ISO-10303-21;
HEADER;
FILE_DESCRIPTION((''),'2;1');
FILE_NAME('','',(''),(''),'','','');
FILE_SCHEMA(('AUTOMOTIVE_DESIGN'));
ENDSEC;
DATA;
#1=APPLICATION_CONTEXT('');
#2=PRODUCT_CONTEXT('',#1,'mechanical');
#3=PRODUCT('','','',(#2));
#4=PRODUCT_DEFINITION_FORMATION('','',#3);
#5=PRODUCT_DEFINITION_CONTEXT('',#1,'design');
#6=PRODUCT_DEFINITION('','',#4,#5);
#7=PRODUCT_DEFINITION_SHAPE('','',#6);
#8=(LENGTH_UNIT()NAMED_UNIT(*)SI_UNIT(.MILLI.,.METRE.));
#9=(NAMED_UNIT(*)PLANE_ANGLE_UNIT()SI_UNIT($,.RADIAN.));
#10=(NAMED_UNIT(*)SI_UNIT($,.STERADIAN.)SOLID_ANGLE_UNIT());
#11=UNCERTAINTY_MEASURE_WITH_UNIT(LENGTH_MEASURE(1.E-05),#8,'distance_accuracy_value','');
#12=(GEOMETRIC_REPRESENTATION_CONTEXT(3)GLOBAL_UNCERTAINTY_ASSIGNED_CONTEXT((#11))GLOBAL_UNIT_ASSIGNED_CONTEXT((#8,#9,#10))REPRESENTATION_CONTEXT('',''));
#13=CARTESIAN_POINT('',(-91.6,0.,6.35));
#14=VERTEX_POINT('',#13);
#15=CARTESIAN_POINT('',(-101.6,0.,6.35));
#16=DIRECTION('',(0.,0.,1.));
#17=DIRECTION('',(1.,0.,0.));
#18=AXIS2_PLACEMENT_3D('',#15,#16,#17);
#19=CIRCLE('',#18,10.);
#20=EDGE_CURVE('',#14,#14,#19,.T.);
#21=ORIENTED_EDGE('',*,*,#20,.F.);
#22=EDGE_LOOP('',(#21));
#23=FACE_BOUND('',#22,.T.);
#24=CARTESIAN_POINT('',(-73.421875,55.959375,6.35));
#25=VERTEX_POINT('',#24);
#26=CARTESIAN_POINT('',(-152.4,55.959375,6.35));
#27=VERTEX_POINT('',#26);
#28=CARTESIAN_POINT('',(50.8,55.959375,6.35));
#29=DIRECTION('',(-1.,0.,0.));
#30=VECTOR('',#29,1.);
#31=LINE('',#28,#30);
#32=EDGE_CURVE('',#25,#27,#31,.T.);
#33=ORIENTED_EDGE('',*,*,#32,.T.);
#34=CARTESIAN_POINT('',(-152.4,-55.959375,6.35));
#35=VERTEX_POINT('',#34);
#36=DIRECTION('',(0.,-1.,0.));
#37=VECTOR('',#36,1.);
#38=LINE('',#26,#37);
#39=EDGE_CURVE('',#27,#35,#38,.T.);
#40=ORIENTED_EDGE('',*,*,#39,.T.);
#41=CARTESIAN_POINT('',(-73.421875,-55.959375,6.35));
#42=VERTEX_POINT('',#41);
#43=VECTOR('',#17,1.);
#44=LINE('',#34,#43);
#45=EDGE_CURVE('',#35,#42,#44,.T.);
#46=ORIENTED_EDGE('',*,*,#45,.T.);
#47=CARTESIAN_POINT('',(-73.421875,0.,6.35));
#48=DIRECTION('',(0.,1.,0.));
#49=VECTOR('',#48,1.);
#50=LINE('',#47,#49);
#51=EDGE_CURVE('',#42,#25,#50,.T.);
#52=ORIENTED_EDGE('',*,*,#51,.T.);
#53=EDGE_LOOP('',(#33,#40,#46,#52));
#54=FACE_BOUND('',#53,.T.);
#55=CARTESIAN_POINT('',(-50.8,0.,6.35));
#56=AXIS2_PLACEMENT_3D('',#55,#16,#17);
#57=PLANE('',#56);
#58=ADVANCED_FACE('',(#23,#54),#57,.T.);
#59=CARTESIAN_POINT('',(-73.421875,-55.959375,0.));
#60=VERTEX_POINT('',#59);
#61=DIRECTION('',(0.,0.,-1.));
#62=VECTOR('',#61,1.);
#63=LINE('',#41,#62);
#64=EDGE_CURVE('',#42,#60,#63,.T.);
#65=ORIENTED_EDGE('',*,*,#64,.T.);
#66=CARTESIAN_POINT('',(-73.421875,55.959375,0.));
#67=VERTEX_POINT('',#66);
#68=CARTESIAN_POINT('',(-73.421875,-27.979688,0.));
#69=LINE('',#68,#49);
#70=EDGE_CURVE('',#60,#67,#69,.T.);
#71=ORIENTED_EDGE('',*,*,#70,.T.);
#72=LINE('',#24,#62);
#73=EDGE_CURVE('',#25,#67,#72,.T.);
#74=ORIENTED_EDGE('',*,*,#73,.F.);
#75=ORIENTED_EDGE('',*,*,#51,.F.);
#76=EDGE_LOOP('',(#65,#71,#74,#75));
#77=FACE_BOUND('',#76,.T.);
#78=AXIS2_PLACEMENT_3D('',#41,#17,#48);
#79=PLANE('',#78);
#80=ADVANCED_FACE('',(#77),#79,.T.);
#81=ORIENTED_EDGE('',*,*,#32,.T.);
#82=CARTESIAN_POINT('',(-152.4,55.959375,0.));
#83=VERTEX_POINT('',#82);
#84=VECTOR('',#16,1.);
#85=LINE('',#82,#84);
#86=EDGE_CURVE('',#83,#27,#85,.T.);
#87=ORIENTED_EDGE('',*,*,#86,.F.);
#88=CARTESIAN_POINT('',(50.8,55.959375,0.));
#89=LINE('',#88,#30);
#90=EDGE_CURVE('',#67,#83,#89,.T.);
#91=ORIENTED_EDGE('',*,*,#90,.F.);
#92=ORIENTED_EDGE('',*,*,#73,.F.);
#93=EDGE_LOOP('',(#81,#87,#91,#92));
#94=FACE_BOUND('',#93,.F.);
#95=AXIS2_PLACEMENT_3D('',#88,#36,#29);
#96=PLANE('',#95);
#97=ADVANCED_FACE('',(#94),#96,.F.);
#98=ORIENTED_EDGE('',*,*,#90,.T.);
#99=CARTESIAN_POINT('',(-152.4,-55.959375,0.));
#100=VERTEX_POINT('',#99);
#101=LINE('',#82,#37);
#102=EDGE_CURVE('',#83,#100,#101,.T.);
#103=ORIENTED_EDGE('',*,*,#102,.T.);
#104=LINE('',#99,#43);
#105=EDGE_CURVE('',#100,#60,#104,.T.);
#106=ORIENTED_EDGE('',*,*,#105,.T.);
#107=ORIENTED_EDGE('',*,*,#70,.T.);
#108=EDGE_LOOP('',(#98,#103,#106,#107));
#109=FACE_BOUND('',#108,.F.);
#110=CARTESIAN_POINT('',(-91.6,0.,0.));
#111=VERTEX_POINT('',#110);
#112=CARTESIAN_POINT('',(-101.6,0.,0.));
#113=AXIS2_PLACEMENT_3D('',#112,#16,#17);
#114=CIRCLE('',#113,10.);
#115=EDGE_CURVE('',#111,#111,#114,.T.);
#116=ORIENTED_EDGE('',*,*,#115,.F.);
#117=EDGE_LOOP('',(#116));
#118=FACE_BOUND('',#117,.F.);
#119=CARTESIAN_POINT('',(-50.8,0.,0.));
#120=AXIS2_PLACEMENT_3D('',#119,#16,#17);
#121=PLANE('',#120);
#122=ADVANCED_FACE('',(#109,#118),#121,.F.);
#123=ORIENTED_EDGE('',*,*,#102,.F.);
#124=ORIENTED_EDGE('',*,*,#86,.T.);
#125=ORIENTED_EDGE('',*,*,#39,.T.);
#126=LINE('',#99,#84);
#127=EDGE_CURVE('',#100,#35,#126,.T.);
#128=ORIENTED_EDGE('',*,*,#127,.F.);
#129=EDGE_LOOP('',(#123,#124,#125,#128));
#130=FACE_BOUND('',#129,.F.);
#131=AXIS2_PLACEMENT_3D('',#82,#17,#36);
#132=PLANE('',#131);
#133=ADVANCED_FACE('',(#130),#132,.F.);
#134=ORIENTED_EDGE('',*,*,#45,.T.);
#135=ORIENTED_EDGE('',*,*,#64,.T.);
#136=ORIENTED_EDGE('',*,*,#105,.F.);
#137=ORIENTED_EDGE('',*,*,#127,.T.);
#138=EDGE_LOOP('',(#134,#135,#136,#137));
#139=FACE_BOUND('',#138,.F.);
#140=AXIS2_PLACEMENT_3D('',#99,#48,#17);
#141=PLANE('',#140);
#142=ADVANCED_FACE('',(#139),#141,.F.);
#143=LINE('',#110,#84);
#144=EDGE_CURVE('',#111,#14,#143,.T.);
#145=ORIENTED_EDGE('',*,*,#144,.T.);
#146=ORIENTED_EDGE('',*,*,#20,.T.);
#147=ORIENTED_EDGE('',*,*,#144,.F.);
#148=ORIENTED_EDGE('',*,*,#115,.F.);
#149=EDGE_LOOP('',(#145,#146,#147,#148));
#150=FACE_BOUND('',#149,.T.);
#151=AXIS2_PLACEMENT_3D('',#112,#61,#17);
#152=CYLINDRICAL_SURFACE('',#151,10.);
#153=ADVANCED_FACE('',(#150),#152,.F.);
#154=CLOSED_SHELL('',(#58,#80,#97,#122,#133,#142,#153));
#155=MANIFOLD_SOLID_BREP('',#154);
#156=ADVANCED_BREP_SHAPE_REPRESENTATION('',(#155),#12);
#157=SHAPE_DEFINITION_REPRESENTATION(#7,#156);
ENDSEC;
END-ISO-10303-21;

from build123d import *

# Parameters (mm, degrees)
F0_R     = 10
F1_DEPTH = 6.35
F2_W     = 124.221875
F2_H     = 111.91875
F2_R     = 10
F3_DEPTH = 6.351


# Not quite as in the source:
# - a feature names something its author has since deleted; it is built from what else it names


with BuildPart() as f1:
    # F0 (on Top) → F1 (new body)
    with BuildSketch(Plane.XY):
        Polygon((50.8, -55.959375), (50.8, 55.959375), (-50.8, 55.959375), (-152.4, 55.959375), (-152.4, -55.959375), (-50.8, -55.959375), align=None)
        with Locations((-101.6, 0)):
            Circle(F0_R, mode=Mode.SUBTRACT)
        Circle(F0_R, mode=Mode.SUBTRACT)
    extrude(amount=F1_DEPTH)

    # F2 (on face) → F3 (cut, through all)
    with BuildSketch(Plane.XY.offset(6.35)):
        with Locations((-11.3109375, 0)):
            Rectangle(F2_W, F2_H)
        Circle(F2_R, mode=Mode.SUBTRACT)
    extrude(amount=-F3_DEPTH, mode=Mode.SUBTRACT)


solid = f1.part
